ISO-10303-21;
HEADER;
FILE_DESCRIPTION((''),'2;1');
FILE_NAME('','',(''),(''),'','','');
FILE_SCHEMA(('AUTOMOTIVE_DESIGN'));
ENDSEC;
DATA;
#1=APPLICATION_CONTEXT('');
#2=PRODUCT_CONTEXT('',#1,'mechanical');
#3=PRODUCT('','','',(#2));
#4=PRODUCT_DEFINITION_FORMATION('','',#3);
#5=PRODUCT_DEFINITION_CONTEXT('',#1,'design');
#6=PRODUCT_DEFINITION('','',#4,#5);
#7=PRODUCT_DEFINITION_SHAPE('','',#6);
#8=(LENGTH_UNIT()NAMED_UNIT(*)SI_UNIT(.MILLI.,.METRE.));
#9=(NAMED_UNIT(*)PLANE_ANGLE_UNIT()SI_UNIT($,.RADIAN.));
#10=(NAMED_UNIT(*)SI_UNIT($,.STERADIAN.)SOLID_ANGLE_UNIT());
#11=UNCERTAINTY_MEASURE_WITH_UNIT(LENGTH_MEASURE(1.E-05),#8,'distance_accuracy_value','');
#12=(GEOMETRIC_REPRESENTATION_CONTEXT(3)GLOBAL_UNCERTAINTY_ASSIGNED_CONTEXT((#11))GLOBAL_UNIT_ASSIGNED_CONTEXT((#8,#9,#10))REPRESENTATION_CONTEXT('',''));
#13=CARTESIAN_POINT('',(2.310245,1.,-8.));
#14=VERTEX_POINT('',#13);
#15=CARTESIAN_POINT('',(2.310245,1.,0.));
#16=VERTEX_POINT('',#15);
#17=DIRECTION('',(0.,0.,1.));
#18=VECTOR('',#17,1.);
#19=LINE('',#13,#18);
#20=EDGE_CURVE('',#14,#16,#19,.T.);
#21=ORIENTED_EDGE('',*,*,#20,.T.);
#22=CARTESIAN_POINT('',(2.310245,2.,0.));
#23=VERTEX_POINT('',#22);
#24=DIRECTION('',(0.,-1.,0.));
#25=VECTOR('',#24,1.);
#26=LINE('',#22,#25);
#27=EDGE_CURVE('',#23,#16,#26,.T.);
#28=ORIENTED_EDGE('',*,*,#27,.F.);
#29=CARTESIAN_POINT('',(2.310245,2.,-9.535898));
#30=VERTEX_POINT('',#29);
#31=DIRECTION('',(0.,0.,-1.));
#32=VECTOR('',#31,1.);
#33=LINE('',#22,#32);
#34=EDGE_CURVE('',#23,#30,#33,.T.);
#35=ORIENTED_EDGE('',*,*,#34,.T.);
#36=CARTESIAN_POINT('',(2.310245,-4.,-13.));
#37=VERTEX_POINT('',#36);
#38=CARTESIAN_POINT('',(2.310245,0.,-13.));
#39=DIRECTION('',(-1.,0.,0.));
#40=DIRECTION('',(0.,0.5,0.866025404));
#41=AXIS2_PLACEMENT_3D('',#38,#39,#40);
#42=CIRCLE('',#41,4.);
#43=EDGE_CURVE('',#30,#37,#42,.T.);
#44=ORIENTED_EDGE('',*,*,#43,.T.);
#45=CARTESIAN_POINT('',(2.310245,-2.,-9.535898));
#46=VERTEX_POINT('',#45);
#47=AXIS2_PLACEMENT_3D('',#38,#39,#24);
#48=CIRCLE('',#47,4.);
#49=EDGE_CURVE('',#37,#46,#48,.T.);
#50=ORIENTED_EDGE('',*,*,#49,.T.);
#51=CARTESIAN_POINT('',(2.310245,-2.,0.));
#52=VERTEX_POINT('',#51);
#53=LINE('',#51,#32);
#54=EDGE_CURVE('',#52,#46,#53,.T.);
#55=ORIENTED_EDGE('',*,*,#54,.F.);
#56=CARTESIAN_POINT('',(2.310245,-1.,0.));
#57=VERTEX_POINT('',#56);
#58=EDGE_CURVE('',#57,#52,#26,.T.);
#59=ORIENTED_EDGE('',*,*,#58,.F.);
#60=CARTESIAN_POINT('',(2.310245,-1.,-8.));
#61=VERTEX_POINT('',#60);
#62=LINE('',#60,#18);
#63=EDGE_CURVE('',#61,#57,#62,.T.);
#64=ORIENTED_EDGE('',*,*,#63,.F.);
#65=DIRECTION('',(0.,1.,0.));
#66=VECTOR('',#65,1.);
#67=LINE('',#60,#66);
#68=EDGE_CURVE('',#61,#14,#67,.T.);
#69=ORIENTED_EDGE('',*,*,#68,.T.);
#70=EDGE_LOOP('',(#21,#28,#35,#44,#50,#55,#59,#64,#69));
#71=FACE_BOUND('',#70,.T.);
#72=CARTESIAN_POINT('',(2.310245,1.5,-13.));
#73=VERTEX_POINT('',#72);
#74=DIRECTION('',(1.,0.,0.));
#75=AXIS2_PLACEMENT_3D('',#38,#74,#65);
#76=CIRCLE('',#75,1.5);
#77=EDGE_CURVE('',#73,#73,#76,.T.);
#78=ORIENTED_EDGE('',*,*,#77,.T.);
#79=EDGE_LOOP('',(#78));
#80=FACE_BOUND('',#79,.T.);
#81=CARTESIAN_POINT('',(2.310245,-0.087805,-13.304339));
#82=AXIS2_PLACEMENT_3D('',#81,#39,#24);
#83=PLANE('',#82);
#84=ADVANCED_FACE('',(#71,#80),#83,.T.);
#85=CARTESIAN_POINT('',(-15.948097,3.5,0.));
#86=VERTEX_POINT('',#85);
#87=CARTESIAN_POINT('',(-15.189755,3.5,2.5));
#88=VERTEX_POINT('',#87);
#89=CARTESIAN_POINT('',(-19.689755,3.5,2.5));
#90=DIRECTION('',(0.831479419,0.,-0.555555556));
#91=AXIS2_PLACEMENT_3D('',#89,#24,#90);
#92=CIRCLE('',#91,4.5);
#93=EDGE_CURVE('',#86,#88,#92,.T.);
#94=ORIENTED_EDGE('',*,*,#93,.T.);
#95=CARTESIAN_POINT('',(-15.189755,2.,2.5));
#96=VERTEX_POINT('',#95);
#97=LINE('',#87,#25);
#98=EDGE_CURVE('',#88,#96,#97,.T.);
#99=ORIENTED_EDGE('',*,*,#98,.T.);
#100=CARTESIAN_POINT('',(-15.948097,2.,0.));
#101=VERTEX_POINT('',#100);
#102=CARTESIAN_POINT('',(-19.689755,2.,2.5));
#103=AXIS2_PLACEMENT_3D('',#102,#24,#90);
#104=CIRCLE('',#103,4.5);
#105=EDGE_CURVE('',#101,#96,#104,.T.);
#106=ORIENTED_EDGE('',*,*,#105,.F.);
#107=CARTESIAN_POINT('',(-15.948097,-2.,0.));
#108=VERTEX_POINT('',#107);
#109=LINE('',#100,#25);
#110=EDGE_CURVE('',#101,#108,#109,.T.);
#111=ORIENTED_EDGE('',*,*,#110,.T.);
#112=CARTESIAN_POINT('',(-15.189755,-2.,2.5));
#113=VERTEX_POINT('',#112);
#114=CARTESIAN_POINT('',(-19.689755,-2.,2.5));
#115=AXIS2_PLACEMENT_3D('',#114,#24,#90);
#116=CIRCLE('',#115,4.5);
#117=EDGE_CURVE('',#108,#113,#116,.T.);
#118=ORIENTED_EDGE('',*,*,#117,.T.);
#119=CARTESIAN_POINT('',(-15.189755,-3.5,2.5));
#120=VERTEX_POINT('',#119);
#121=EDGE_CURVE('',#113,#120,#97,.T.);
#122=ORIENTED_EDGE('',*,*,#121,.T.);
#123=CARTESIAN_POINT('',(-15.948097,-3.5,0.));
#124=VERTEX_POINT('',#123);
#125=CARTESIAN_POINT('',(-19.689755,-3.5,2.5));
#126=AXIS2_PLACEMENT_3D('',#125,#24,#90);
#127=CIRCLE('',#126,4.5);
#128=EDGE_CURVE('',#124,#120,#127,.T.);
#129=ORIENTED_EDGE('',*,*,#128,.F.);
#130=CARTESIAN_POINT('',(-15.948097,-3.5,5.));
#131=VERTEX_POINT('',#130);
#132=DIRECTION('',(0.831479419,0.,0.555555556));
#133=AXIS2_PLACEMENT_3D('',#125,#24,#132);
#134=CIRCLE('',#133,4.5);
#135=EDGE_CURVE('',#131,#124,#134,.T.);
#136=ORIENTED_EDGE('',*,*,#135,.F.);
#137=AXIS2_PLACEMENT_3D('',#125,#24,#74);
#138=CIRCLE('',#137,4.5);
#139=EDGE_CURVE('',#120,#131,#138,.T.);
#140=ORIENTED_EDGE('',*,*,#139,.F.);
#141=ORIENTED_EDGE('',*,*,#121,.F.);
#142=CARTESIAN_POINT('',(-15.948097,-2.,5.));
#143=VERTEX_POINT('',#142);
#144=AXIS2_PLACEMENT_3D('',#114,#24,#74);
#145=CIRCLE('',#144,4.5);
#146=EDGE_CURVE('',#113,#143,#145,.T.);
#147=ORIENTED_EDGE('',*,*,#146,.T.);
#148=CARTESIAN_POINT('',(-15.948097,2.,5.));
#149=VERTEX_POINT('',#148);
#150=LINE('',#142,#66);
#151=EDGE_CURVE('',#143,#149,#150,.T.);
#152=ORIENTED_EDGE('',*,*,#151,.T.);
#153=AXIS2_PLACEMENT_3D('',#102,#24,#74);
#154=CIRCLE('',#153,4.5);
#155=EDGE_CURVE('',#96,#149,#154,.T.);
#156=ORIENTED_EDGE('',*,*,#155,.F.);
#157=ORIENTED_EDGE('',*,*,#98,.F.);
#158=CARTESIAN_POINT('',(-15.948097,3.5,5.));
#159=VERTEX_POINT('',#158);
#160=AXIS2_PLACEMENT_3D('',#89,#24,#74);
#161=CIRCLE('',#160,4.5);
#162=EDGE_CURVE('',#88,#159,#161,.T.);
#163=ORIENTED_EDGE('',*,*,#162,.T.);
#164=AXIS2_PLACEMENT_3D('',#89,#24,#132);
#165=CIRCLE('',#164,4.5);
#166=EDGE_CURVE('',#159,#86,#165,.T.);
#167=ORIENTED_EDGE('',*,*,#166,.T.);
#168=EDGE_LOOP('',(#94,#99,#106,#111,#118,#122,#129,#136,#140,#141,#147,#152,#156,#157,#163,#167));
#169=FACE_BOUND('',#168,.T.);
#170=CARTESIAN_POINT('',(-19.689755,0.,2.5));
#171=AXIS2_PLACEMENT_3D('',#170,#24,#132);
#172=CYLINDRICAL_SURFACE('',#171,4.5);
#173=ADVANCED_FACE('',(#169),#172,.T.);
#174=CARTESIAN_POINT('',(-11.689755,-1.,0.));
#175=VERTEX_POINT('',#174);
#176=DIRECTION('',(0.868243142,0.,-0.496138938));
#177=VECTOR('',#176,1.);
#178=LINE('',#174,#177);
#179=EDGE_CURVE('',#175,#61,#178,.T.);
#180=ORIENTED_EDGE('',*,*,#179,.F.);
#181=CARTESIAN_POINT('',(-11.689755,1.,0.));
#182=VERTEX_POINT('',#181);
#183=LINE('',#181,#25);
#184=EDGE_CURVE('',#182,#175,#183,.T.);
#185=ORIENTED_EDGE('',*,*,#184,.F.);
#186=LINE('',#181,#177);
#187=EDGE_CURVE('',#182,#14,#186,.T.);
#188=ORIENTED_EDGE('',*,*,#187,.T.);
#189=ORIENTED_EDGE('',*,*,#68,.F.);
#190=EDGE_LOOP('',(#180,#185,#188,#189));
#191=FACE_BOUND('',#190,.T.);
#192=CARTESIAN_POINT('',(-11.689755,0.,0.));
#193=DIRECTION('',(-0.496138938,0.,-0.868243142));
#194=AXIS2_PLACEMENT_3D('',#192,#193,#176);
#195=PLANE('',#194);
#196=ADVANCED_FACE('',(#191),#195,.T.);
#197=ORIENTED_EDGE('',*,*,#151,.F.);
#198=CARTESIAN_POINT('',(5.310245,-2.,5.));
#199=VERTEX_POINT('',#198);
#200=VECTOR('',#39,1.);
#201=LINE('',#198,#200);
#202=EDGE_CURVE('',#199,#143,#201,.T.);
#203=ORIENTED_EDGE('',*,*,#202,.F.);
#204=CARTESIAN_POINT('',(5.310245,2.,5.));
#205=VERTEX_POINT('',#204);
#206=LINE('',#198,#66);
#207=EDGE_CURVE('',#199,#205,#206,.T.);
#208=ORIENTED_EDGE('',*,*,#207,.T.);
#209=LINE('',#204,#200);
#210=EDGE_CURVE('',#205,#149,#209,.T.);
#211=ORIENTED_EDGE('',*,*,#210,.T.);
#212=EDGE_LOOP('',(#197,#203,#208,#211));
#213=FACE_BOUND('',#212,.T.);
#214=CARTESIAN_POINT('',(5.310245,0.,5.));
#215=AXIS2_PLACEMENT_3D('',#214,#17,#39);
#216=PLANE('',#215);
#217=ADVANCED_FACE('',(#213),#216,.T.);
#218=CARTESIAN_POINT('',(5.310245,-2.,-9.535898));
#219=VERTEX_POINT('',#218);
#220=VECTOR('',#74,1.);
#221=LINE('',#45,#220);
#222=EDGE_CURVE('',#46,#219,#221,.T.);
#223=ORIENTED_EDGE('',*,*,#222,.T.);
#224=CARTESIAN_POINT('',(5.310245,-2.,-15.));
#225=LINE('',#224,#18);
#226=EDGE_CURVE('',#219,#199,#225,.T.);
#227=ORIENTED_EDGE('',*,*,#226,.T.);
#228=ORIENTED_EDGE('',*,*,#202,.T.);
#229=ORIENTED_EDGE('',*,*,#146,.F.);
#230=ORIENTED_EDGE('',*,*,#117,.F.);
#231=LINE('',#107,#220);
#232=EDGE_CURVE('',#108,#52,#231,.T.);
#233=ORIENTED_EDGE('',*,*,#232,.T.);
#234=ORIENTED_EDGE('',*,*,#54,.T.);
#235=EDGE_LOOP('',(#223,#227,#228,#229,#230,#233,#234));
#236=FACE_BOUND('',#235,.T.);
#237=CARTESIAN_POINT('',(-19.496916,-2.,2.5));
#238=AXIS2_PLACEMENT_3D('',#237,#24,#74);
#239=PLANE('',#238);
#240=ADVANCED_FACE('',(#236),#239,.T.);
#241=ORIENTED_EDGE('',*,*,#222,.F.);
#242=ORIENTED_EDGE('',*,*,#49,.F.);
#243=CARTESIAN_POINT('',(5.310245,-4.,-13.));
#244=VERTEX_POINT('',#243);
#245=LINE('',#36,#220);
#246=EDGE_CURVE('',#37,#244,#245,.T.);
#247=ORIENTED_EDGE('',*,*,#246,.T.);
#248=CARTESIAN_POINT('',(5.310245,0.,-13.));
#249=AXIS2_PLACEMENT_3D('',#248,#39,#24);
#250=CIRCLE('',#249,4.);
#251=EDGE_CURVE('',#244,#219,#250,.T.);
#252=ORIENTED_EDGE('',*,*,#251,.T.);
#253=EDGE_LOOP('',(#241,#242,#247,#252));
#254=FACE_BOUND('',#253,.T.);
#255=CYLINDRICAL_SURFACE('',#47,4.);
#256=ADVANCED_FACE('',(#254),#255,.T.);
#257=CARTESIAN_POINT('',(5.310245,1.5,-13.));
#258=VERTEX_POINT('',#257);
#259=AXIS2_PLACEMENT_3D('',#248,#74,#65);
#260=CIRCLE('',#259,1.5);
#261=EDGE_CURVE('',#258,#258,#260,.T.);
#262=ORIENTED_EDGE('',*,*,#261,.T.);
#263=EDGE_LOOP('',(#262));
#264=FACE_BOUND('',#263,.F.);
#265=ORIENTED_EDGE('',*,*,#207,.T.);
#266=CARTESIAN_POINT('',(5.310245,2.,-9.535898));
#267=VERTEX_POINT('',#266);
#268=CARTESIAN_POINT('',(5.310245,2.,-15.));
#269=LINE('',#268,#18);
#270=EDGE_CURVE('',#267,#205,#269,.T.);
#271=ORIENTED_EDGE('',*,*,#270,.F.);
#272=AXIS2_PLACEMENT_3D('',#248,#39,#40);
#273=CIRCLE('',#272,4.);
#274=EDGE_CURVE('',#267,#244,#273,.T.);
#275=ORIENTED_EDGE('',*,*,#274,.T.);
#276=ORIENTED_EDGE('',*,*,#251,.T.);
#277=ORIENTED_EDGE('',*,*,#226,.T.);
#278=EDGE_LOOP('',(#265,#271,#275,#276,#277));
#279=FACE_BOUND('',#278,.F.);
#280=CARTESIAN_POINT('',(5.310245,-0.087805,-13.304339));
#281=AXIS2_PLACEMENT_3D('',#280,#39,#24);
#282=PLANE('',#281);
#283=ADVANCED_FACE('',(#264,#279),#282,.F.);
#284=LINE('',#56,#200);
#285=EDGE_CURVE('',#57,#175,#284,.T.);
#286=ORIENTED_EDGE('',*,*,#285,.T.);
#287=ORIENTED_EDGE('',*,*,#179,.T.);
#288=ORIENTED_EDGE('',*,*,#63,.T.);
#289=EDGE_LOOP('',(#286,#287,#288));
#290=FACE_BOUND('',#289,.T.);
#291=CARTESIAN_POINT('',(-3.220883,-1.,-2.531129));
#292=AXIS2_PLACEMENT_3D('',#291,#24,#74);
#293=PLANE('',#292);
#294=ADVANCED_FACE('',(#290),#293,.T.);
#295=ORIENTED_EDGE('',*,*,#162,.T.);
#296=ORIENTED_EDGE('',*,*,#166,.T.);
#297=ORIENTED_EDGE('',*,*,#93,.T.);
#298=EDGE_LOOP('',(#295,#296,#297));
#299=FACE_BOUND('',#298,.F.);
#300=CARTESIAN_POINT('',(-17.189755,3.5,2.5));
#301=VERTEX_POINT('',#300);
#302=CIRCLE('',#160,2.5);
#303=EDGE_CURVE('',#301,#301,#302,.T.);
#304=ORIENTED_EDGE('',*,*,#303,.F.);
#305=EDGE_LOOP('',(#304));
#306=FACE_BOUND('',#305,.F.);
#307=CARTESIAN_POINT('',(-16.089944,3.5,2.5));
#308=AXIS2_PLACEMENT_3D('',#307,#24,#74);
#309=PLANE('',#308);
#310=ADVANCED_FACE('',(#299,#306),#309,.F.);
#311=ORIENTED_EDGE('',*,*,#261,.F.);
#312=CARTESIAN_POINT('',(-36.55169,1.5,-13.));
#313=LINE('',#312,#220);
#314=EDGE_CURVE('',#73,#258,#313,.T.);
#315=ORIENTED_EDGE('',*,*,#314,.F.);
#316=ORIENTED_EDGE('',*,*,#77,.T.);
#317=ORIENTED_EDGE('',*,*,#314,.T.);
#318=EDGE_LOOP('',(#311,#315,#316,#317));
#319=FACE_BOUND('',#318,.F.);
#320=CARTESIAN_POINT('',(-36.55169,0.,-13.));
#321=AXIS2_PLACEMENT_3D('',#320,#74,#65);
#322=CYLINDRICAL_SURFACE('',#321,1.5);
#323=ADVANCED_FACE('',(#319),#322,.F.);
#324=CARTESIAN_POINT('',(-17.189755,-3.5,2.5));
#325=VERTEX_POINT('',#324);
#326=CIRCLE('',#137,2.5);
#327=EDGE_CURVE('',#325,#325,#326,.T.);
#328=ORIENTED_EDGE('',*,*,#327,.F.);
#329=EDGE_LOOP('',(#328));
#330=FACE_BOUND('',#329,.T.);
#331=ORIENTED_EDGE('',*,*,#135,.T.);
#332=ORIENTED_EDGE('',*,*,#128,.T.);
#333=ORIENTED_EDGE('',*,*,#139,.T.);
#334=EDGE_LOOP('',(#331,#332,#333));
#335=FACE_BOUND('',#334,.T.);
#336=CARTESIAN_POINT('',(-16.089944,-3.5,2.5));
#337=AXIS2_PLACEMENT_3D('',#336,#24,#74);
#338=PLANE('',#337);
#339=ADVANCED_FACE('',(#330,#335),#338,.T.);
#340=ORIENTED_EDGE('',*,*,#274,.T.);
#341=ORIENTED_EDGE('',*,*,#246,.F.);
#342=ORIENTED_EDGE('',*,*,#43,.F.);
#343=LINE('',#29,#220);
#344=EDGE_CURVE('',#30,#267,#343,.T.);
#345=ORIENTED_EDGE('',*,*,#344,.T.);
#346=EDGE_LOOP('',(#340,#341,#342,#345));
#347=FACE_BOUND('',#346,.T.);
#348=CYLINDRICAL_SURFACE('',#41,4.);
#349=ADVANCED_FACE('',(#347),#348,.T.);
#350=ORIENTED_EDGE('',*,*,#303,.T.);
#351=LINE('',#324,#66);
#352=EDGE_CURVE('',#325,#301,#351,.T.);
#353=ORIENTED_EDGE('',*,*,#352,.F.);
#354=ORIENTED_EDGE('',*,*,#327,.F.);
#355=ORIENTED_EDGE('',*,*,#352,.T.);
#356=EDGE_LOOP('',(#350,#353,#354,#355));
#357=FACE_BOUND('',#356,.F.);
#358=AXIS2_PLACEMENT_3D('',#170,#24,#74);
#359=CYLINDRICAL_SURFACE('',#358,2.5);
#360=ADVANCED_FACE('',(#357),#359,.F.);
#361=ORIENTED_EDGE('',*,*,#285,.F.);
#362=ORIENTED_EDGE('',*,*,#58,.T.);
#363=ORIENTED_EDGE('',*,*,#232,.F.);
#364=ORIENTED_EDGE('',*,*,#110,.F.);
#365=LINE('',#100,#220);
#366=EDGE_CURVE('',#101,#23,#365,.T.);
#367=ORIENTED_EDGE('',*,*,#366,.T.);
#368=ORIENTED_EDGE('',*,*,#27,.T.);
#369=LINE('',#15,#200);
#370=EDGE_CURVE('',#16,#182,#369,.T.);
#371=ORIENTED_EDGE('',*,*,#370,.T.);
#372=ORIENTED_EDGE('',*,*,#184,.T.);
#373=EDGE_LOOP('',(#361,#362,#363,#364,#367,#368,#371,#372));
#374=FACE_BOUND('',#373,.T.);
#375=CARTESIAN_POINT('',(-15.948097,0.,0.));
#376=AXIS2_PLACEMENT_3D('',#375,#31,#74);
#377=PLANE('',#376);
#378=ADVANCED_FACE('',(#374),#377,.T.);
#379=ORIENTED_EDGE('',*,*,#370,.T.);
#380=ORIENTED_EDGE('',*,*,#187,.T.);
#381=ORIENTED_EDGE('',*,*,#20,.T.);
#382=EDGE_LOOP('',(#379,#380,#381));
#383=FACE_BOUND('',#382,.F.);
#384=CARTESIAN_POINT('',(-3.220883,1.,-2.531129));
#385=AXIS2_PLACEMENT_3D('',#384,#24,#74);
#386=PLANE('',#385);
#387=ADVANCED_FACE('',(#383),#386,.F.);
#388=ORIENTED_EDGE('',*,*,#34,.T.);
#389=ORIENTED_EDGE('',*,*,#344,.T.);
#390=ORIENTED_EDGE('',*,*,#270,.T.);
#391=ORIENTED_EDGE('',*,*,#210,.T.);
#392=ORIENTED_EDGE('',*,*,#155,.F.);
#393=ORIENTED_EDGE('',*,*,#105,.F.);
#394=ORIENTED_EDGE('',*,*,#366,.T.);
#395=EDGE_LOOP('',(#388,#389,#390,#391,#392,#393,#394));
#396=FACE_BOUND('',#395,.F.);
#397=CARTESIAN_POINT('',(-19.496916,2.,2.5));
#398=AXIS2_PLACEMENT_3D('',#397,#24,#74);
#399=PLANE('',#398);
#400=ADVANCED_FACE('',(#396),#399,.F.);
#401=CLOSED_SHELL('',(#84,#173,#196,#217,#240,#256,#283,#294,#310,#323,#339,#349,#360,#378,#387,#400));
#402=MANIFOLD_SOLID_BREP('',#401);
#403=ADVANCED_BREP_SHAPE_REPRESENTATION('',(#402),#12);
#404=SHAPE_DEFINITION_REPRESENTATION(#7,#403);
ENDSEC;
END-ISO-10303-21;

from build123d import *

# Parameters (mm, degrees)
F0_R     = 2.5
F1_DEPTH = 3.5
F2_DEPTH = 2
F4_DEPTH = 3
F6_D     = 3
F8_DEPTH = 1


with BuildPart() as f1:
    # F0 (on Front) → F1 (new body, symmetric)
    with BuildSketch(Plane.XZ):
        with BuildLine():
            Line((-15.9480972197, 5), (-16.6897546064, 5))
            Line((-16.6897546064, 5), (-16.6897546064, 0))
            Line((-16.6897546064, 0), (-15.9480972197, 0))
            ThreePointArc((-15.9480972197, 0), (-15.3835115664, 1.1937569599), (-15.1897546064, 2.5))
            ThreePointArc((-15.1897546064, 2.5), (-15.3835115664, 3.8062430401), (-15.9480972197, 5))
        make_face()
        with BuildLine():
            Line((-16.6897546064, 0), (-16.6897546064, 5))
            Line((-16.6897546064, 5), (-15.9480972197, 5))
            ThreePointArc((-15.9480972197, 5), (-24.1897546064, 2.5), (-15.9480972197, 0))
            Line((-15.9480972197, 0), (-16.6897546064, 0))
        make_face()
        with Locations((-19.6897546064, 2.5)):
            Circle(F0_R, mode=Mode.SUBTRACT)
    extrude(amount=F1_DEPTH, both=True)

    # F0 (on Front) → F2 (join, symmetric)
    with BuildSketch(Plane.XZ):
        with BuildLine():
            Line((-16.6897546064, 0), (-16.6897546064, 5))
            Line((-16.6897546064, 5), (-15.9480972197, 5))
            ThreePointArc((-15.9480972197, 5), (-24.1897546064, 2.5), (-15.9480972197, 0))
            Line((-15.9480972197, 0), (-16.6897546064, 0))
        make_face()
        with Locations((-19.6897546064, 2.5)):
            Circle(F0_R, mode=Mode.SUBTRACT)
        with BuildLine():
            Line((-15.9480972197, 5), (-16.6897546064, 5))
            Line((-16.6897546064, 5), (-16.6897546064, 0))
            Line((-16.6897546064, 0), (-15.9480972197, 0))
            ThreePointArc((-15.9480972197, 0), (-15.3835115664, 1.1937569599), (-15.1897546064, 2.5))
            ThreePointArc((-15.1897546064, 2.5), (-15.3835115664, 3.8062430401), (-15.9480972197, 5))
        make_face()
        with BuildLine():
            Line((5.3102453936, 5), (-15.9480972197, 5))
            ThreePointArc((-15.9480972197, 5), (-15.3835115664, 3.8062430401), (-15.1897546064, 2.5))
            ThreePointArc((-15.1897546064, 2.5), (-15.3835115664, 1.1937569599), (-15.9480972197, 0))
            Line((-15.9480972197, 0), (2.3102453936, 0))
            Line((2.3102453936, 0), (2.3102453936, -15))
            Line((2.3102453936, -15), (5.3102453936, -15))
            Line((5.3102453936, -15), (5.3102453936, 5))
        make_face()
    extrude(amount=F2_DEPTH, both=True)

    # F3 (on face) → F4 (join)
    with BuildSketch(Plane(origin=(2.3102453936, 0, 0), x_dir=(0, -1, 0), z_dir=(-1, 0, 0))):
        with BuildLine():
            ThreePointArc((-2, -9.5358983849), (-2, -16.4641016151), (4, -13))
            ThreePointArc((4, -13), (3.4641016151, -11), (2, -9.5358983849))
            Line((2, -9.5358983849), (2, -15))
            Line((2, -15), (-2, -15))
            Line((-2, -15), (-2, -9.5358983849))
        make_face()
        with BuildLine():
            Line((2, -15), (2, -9.5358983849))
            ThreePointArc((2, -9.5358983849), (0, -9), (-2, -9.5358983849))
            Line((-2, -9.5358983849), (-2, -15))
            Line((-2, -15), (2, -15))
        make_face()
    extrude(amount=-F4_DEPTH)

    # F6 (through all)
    with Locations(Plane(origin=(2.3102453936, 0, 0), x_dir=(0, -1, 0), z_dir=(-1, 0, 0))):
        with Locations((0, -13)):
            Hole(F6_D / 2)

    # F7 (on Front) → F8 (join, symmetric)
    with BuildSketch(Plane.XZ):
        Polygon((2.3102453936, 0), (-11.6897546064, 0), (2.3102453936, -8), align=None)
    extrude(amount=F8_DEPTH, both=True)


solid = f1.part
